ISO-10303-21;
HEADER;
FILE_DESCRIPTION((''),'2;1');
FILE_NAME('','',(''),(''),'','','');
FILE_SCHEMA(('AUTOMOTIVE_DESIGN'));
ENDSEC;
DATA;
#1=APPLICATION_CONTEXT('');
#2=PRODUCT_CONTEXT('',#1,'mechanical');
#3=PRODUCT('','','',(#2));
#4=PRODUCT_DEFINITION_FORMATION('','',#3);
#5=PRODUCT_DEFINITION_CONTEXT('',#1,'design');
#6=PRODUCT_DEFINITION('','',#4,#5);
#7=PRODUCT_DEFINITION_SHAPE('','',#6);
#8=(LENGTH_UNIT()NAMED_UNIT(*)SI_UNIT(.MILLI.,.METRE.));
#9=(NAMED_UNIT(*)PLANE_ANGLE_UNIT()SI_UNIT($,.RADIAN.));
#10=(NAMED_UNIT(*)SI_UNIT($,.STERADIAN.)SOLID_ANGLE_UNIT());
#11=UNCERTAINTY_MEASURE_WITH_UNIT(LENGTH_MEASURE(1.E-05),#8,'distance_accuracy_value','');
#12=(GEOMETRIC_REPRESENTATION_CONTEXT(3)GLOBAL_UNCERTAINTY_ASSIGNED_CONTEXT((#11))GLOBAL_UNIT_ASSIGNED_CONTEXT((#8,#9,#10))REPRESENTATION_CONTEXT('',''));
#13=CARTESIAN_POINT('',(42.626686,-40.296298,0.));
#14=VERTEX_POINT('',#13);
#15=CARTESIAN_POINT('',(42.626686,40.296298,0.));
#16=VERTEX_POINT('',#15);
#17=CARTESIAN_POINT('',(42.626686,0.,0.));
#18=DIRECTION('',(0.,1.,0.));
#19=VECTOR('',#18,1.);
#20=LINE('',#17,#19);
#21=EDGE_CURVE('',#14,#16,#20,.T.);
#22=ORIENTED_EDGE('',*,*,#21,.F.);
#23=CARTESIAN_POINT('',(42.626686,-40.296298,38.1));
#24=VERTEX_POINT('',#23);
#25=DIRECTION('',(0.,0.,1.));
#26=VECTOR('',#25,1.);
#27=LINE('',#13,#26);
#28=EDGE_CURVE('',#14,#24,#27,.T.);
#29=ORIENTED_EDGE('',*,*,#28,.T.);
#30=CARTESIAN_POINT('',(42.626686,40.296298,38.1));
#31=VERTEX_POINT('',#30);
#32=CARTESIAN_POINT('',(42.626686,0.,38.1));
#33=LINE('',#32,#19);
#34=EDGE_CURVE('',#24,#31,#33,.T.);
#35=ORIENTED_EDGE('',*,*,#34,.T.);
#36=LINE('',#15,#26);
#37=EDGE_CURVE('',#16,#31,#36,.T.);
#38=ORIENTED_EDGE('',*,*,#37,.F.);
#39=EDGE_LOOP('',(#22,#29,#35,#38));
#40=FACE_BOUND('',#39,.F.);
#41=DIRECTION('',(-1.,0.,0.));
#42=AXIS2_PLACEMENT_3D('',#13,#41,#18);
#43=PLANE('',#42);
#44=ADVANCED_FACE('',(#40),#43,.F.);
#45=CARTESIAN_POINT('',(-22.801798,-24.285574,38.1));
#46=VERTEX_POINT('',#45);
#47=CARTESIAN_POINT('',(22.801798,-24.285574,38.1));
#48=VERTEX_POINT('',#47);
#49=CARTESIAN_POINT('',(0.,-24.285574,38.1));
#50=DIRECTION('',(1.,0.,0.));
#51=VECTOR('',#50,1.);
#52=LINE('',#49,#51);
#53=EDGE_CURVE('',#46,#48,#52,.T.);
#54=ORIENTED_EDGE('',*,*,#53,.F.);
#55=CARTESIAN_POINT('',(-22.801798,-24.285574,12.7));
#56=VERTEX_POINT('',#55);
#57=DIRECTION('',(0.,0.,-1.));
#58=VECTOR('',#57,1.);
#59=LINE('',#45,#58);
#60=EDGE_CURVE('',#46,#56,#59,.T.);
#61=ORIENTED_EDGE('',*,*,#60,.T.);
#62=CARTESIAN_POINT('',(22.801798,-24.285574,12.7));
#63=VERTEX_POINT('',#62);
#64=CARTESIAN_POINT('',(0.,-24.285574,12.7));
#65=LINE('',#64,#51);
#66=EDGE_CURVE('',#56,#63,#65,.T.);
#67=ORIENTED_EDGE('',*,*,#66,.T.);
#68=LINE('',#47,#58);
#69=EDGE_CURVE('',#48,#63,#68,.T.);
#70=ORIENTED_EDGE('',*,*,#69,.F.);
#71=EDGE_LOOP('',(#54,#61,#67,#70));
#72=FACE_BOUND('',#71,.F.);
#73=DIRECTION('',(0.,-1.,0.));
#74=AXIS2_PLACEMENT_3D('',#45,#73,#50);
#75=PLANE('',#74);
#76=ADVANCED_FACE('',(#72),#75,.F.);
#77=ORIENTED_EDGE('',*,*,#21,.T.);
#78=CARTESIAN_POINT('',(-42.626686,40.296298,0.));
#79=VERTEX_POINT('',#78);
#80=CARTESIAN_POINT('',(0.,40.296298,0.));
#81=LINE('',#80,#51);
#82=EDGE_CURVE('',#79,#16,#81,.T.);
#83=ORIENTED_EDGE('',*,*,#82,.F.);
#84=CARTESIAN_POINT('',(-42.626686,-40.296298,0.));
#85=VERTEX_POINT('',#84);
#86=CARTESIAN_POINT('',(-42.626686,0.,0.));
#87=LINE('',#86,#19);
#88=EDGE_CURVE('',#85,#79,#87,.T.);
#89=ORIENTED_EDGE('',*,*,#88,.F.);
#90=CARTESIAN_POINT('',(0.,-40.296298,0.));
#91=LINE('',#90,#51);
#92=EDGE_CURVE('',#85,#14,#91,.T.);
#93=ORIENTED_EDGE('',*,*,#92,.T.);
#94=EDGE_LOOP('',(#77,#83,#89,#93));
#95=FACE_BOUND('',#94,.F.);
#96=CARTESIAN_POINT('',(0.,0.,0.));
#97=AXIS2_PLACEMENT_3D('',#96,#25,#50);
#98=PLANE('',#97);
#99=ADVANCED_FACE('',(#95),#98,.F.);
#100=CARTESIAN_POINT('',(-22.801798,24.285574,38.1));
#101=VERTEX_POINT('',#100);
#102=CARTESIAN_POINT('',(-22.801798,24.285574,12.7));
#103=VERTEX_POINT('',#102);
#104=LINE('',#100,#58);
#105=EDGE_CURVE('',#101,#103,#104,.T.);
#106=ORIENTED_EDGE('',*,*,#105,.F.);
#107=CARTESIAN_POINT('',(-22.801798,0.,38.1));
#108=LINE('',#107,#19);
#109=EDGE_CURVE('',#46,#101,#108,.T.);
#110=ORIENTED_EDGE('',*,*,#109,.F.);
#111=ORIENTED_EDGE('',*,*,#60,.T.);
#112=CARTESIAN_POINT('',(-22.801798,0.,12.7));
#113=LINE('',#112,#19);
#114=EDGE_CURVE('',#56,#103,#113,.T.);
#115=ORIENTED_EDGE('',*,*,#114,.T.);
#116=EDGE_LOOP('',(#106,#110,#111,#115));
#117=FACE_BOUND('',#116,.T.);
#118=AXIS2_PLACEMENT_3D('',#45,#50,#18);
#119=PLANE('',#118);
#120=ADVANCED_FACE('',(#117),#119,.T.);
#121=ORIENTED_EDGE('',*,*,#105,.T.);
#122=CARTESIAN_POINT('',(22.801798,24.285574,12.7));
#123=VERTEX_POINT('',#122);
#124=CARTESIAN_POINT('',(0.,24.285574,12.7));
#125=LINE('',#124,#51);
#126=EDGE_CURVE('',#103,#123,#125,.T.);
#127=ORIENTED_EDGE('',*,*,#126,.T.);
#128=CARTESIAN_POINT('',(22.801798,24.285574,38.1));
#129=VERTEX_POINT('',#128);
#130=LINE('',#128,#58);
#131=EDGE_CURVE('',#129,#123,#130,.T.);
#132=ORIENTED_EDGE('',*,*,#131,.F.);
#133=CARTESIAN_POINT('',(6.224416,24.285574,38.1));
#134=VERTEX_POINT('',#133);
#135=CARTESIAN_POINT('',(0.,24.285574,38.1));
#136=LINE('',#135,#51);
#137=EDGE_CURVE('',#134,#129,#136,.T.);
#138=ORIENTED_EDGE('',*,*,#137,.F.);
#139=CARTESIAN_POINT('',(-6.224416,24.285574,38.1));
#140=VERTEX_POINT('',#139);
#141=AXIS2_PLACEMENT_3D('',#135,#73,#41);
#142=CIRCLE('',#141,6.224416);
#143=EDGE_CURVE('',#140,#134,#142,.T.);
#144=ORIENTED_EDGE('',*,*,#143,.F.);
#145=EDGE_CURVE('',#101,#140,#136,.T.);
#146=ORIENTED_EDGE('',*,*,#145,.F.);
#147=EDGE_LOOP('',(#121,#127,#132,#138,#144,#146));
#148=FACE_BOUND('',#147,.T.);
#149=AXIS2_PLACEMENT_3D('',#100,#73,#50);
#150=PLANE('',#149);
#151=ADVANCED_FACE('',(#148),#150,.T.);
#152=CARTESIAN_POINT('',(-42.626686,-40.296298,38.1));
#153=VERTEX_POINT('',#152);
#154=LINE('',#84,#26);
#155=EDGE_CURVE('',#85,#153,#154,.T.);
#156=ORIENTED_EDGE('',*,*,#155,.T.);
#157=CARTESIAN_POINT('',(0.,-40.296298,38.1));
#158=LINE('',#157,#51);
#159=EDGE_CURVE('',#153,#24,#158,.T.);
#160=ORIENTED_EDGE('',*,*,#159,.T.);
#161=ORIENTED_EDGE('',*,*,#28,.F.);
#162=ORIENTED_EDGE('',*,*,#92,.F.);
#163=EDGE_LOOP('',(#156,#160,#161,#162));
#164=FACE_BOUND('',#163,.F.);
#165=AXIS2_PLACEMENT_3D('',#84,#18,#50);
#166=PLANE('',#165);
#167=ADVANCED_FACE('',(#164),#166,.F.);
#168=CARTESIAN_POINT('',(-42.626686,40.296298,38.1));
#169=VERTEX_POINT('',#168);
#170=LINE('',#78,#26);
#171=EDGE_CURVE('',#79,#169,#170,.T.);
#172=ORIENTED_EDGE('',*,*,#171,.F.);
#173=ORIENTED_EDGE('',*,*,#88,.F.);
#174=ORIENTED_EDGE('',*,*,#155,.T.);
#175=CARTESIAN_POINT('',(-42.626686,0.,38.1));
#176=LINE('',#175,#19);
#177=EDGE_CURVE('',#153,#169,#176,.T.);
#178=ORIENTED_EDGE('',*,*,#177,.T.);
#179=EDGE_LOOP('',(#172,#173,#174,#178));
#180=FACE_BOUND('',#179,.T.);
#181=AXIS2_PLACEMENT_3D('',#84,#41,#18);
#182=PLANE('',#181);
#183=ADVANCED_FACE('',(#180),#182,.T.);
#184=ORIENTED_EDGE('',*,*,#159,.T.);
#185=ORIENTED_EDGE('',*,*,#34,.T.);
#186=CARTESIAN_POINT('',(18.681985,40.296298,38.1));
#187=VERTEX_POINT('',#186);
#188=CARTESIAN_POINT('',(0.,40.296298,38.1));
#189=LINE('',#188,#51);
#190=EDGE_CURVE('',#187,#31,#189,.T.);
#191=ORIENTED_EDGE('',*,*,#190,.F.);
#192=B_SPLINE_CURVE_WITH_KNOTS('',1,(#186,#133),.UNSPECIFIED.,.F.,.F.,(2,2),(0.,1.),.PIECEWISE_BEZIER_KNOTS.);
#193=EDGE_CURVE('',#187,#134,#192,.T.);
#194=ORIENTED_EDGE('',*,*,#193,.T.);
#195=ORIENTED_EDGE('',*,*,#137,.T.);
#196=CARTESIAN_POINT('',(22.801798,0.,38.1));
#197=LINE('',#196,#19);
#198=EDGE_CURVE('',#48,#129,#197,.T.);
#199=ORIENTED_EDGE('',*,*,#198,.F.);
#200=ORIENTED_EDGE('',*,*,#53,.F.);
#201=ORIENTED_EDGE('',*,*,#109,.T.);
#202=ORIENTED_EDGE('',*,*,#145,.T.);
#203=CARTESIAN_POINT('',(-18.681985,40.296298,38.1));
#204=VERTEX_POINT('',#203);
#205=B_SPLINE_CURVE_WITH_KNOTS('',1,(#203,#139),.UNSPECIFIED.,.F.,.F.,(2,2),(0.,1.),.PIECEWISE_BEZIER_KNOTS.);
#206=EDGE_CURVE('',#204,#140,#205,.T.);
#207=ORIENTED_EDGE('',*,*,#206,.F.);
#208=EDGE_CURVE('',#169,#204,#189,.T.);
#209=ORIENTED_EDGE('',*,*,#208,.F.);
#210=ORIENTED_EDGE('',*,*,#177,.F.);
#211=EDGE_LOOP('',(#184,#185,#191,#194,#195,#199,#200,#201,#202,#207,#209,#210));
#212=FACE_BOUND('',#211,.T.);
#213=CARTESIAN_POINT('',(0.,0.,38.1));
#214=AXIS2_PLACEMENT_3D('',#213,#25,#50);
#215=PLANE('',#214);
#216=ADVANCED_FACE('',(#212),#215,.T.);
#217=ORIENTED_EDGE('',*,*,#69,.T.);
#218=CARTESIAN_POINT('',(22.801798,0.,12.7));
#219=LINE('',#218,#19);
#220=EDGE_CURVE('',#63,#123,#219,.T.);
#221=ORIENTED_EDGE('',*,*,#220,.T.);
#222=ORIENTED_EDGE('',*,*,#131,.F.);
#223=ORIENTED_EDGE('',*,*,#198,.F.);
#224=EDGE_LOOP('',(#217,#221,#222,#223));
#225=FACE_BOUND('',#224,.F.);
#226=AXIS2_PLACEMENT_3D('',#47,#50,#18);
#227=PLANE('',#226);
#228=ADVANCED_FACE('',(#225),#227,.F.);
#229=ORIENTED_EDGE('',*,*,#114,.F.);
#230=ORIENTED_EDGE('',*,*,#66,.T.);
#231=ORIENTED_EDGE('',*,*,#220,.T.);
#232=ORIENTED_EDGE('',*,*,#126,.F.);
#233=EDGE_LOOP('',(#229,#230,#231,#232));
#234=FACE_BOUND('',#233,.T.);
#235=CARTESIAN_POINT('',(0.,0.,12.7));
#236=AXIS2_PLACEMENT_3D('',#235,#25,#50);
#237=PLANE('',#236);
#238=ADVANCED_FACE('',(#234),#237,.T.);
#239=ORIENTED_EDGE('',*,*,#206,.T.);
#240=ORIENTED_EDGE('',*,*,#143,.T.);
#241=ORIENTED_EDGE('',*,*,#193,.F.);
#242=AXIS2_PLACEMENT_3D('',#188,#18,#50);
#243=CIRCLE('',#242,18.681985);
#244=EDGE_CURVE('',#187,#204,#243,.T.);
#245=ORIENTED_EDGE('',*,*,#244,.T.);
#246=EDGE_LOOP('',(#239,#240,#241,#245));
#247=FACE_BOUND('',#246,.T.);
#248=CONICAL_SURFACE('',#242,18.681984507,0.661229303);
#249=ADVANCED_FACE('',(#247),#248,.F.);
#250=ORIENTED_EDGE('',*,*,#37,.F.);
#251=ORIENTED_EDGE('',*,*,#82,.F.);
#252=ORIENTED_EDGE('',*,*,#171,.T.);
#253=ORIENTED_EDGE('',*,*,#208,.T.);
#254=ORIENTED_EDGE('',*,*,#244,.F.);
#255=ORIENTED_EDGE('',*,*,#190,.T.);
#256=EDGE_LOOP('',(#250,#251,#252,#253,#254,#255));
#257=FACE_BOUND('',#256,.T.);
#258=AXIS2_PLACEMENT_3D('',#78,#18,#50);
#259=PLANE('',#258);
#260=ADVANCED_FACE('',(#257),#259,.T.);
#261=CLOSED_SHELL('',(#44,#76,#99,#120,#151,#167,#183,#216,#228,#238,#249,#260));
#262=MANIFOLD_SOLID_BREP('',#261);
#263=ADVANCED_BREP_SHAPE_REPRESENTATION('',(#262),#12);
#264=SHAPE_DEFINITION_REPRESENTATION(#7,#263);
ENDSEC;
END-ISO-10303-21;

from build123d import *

# Parameters (mm, degrees)
F0_W     = 85.2533727884
F0_H     = 80.5925950408
F1_DEPTH = 38.1
F2_W     = 45.603595674
F2_H     = 48.5711470246
F3_DEPTH = 25.4


with BuildPart() as f1:
    # F0 (on Top) → F1 (new body)
    with BuildSketch(Plane.XY):
        Rectangle(F0_W, F0_H)
    extrude(amount=F1_DEPTH)

    # F2 (on face) → F3 (cut)
    with BuildSketch(Plane.XY.offset(38.1)):
        Rectangle(F2_W, F2_H)
    extrude(amount=-F3_DEPTH, mode=Mode.SUBTRACT)

    # F4 (on face) → F6 section 0
    with BuildSketch(Plane(origin=(0, 40.2962975204, 0), x_dir=(-1, 0, 0), z_dir=(0, 1, 0))):
        with BuildLine():
            Line((18.6819845074, 38.1), (-18.6819845074, 38.1))
            ThreePointArc((-18.6819845074, 38.1), (0, 19.4180154926), (18.6819845074, 38.1))
        make_face()
    # F5 (on face) → F6 section 1
    with BuildSketch(Plane.XZ.offset(-24.2855735123)):
        with BuildLine():
            Line((6.2244155373, 38.1), (-6.2244155373, 38.1))
            ThreePointArc((-6.2244155373, 38.1), (0, 31.8755844627), (6.2244155373, 38.1))
        make_face()
    loft(mode=Mode.SUBTRACT)


solid = f1.part
